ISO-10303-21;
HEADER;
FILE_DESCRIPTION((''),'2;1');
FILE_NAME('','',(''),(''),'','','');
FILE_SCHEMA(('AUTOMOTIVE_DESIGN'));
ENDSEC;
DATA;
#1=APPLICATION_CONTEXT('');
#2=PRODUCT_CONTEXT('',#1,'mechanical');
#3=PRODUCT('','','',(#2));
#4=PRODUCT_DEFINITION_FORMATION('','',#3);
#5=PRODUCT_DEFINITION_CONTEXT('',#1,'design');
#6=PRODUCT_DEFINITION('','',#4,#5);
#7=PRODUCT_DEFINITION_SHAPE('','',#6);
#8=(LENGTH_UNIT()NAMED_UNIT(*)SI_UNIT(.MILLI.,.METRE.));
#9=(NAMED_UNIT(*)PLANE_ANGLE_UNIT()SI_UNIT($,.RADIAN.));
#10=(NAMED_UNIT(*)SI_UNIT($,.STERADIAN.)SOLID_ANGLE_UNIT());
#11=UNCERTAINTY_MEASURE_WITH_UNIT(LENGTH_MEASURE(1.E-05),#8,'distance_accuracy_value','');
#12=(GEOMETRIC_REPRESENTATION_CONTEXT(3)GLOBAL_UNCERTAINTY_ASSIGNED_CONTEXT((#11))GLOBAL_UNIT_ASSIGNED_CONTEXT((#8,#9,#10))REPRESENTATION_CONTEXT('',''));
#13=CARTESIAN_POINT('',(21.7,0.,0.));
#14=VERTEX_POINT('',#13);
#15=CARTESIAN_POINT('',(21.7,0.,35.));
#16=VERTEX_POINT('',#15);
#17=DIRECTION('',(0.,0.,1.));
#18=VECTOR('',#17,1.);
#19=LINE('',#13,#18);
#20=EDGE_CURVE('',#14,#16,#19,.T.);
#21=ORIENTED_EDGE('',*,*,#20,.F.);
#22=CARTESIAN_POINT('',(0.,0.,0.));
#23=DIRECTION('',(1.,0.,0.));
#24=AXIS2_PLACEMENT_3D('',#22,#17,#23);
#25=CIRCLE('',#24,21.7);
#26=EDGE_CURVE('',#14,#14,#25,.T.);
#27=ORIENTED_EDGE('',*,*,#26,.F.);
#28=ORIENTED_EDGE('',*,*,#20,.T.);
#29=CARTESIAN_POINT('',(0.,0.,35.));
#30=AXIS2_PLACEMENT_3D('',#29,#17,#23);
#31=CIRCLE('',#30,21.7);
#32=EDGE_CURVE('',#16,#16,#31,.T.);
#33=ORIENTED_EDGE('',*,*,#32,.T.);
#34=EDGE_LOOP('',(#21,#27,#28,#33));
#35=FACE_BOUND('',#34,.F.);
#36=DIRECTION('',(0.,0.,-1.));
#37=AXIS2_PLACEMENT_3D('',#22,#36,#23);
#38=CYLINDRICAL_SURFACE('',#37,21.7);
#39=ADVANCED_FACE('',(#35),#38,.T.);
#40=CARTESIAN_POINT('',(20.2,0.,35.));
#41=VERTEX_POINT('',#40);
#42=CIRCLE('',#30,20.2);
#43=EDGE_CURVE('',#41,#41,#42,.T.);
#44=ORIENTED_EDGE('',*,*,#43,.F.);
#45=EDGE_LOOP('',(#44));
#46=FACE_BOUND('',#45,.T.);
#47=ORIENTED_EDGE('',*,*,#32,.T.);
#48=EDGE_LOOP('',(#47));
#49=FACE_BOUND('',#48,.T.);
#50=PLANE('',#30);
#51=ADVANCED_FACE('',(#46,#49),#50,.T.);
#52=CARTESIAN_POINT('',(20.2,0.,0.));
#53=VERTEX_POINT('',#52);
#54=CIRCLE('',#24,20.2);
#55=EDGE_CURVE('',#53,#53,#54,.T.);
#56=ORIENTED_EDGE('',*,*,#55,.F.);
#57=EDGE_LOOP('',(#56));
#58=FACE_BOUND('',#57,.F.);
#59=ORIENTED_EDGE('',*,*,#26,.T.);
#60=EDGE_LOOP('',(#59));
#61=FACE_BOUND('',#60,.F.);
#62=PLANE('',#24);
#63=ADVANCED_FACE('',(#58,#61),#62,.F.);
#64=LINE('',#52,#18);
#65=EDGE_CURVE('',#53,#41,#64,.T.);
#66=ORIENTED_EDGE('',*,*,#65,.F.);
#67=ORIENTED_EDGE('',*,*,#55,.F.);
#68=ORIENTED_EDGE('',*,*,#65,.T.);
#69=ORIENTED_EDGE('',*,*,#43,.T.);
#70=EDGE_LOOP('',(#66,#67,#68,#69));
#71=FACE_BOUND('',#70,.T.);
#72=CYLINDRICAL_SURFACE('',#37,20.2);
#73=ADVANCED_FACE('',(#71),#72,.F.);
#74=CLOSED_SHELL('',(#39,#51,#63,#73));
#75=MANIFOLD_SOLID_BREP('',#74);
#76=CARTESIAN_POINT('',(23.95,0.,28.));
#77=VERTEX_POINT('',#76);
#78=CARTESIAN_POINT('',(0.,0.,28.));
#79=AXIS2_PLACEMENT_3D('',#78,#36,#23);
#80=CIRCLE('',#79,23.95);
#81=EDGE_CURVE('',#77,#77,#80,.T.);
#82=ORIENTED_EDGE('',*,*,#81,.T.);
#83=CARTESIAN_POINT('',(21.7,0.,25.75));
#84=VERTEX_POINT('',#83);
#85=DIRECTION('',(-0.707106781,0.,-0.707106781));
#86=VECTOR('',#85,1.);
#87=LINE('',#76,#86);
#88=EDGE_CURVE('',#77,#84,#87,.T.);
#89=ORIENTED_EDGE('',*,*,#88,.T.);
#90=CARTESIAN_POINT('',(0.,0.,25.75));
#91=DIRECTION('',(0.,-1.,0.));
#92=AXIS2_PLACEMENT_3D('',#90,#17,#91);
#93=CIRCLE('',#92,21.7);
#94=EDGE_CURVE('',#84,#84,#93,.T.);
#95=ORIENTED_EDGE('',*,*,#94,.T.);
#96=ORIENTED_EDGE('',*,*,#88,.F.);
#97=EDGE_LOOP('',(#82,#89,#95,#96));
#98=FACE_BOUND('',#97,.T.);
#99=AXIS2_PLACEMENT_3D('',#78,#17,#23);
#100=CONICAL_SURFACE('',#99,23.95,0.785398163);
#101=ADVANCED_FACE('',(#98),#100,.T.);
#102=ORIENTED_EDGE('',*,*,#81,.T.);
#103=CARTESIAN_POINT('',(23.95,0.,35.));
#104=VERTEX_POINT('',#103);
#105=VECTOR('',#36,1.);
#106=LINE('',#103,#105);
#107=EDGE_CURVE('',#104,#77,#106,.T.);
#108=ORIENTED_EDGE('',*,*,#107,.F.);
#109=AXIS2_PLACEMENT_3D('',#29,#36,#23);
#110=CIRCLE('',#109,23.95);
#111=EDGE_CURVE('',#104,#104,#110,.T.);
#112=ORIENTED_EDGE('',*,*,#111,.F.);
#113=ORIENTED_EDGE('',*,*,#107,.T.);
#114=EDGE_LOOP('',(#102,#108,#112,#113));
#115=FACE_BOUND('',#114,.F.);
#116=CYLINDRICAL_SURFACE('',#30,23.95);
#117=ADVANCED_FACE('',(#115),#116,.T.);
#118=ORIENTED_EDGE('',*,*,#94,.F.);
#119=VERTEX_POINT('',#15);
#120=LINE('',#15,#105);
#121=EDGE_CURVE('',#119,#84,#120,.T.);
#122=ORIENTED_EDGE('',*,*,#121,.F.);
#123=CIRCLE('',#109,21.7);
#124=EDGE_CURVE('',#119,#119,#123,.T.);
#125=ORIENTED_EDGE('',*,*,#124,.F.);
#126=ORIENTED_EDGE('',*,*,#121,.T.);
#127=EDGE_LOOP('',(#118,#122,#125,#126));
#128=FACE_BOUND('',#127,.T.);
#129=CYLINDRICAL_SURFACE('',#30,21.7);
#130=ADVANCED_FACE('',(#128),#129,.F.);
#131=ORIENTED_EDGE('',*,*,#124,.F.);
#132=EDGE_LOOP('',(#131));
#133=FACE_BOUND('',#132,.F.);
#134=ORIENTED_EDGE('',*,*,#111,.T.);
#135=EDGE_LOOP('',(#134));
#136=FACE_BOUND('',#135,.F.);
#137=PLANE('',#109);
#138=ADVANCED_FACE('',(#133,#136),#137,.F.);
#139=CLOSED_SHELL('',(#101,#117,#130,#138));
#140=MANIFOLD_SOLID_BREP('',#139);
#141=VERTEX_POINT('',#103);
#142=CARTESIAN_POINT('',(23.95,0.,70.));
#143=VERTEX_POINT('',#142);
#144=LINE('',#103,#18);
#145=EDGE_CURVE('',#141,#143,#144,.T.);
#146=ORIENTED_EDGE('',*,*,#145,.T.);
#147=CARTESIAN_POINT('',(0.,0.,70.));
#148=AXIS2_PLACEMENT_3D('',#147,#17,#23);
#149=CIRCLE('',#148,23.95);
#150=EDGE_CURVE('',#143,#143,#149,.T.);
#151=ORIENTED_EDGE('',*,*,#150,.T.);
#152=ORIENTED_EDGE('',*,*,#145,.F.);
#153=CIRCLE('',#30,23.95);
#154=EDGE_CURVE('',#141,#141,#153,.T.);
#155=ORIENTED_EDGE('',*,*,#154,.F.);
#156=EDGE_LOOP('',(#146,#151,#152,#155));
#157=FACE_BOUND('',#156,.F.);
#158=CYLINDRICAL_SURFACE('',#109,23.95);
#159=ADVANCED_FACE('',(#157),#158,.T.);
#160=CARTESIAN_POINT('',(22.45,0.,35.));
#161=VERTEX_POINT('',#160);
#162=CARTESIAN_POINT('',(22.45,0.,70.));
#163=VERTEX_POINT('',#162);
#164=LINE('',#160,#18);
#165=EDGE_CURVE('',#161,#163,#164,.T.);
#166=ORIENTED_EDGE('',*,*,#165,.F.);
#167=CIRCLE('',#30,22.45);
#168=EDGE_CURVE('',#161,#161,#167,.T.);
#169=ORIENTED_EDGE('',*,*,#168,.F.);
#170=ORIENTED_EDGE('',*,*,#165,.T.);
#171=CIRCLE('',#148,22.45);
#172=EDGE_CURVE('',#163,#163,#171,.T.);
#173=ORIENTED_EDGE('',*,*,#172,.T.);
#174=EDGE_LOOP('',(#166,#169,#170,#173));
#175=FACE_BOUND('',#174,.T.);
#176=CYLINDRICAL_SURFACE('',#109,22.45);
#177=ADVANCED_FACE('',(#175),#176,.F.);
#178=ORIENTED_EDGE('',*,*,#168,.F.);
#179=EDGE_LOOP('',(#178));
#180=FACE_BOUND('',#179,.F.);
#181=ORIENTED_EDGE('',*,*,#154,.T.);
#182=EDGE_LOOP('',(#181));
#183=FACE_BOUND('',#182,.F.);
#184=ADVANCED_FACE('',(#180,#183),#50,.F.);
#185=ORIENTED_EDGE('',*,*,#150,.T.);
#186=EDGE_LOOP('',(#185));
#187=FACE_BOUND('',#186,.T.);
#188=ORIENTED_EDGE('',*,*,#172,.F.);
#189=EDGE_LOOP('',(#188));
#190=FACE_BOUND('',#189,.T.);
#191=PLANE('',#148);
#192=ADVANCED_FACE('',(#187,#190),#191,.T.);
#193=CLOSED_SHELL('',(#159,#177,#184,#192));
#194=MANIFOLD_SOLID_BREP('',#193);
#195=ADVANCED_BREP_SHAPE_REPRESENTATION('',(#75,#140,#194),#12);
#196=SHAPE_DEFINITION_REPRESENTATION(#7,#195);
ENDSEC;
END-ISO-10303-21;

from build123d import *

# Parameters (mm, degrees)
F0_R     = 21.7
F0_R_2   = 20.2
F1_DEPTH = 35
F2_R     = 23.95
F2_R_2   = 22.45
F3_DEPTH = 35
F4_R     = 23.95
F4_R_2   = 21.7
F5_DEPTH = 10


# Not quite as in the source:
# - a fillet or chamfer that OpenCascade refuses, or shapes differently, is made with other operations: its cross-section is extruded or revolved along the edge and cut away or added


with BuildPart() as f1:
    # F0 (on Top) → F1 (new body)
    with BuildSketch(Plane.XY):
        Circle(F0_R)
        Circle(F0_R_2, mode=Mode.SUBTRACT)
    extrude(amount=F1_DEPTH)


with BuildPart() as f3:
    # F2 (on face) → F3 (new body)
    with BuildSketch(Plane.XY.offset(35)):
        Circle(F2_R)
        Circle(F2_R_2, mode=Mode.SUBTRACT)
    extrude(amount=F3_DEPTH)


with BuildPart() as f5:
    # F4 (on face) → F5 (new body)
    with BuildSketch(Plane(origin=(0, 0, 35), x_dir=(1, 0, 0), z_dir=(0, 0, -1))):
        Circle(F4_R)
        Circle(F4_R_2, mode=Mode.SUBTRACT)
    extrude(amount=F5_DEPTH)

    # F6: chamfer of 3 on 1 edges, made by hand

    # F6_s1 → F6_t2 (revolve, cut)
    with BuildSketch(Plane.XZ):
        Polygon((23.95, 28), (20.95, 25), (23.95, 25), align=None)
    revolve(axis=Axis((0, 0, 25), (0, 0, -1)), mode=Mode.SUBTRACT)


solid = Compound([f1.part, f3.part, f5.part])
